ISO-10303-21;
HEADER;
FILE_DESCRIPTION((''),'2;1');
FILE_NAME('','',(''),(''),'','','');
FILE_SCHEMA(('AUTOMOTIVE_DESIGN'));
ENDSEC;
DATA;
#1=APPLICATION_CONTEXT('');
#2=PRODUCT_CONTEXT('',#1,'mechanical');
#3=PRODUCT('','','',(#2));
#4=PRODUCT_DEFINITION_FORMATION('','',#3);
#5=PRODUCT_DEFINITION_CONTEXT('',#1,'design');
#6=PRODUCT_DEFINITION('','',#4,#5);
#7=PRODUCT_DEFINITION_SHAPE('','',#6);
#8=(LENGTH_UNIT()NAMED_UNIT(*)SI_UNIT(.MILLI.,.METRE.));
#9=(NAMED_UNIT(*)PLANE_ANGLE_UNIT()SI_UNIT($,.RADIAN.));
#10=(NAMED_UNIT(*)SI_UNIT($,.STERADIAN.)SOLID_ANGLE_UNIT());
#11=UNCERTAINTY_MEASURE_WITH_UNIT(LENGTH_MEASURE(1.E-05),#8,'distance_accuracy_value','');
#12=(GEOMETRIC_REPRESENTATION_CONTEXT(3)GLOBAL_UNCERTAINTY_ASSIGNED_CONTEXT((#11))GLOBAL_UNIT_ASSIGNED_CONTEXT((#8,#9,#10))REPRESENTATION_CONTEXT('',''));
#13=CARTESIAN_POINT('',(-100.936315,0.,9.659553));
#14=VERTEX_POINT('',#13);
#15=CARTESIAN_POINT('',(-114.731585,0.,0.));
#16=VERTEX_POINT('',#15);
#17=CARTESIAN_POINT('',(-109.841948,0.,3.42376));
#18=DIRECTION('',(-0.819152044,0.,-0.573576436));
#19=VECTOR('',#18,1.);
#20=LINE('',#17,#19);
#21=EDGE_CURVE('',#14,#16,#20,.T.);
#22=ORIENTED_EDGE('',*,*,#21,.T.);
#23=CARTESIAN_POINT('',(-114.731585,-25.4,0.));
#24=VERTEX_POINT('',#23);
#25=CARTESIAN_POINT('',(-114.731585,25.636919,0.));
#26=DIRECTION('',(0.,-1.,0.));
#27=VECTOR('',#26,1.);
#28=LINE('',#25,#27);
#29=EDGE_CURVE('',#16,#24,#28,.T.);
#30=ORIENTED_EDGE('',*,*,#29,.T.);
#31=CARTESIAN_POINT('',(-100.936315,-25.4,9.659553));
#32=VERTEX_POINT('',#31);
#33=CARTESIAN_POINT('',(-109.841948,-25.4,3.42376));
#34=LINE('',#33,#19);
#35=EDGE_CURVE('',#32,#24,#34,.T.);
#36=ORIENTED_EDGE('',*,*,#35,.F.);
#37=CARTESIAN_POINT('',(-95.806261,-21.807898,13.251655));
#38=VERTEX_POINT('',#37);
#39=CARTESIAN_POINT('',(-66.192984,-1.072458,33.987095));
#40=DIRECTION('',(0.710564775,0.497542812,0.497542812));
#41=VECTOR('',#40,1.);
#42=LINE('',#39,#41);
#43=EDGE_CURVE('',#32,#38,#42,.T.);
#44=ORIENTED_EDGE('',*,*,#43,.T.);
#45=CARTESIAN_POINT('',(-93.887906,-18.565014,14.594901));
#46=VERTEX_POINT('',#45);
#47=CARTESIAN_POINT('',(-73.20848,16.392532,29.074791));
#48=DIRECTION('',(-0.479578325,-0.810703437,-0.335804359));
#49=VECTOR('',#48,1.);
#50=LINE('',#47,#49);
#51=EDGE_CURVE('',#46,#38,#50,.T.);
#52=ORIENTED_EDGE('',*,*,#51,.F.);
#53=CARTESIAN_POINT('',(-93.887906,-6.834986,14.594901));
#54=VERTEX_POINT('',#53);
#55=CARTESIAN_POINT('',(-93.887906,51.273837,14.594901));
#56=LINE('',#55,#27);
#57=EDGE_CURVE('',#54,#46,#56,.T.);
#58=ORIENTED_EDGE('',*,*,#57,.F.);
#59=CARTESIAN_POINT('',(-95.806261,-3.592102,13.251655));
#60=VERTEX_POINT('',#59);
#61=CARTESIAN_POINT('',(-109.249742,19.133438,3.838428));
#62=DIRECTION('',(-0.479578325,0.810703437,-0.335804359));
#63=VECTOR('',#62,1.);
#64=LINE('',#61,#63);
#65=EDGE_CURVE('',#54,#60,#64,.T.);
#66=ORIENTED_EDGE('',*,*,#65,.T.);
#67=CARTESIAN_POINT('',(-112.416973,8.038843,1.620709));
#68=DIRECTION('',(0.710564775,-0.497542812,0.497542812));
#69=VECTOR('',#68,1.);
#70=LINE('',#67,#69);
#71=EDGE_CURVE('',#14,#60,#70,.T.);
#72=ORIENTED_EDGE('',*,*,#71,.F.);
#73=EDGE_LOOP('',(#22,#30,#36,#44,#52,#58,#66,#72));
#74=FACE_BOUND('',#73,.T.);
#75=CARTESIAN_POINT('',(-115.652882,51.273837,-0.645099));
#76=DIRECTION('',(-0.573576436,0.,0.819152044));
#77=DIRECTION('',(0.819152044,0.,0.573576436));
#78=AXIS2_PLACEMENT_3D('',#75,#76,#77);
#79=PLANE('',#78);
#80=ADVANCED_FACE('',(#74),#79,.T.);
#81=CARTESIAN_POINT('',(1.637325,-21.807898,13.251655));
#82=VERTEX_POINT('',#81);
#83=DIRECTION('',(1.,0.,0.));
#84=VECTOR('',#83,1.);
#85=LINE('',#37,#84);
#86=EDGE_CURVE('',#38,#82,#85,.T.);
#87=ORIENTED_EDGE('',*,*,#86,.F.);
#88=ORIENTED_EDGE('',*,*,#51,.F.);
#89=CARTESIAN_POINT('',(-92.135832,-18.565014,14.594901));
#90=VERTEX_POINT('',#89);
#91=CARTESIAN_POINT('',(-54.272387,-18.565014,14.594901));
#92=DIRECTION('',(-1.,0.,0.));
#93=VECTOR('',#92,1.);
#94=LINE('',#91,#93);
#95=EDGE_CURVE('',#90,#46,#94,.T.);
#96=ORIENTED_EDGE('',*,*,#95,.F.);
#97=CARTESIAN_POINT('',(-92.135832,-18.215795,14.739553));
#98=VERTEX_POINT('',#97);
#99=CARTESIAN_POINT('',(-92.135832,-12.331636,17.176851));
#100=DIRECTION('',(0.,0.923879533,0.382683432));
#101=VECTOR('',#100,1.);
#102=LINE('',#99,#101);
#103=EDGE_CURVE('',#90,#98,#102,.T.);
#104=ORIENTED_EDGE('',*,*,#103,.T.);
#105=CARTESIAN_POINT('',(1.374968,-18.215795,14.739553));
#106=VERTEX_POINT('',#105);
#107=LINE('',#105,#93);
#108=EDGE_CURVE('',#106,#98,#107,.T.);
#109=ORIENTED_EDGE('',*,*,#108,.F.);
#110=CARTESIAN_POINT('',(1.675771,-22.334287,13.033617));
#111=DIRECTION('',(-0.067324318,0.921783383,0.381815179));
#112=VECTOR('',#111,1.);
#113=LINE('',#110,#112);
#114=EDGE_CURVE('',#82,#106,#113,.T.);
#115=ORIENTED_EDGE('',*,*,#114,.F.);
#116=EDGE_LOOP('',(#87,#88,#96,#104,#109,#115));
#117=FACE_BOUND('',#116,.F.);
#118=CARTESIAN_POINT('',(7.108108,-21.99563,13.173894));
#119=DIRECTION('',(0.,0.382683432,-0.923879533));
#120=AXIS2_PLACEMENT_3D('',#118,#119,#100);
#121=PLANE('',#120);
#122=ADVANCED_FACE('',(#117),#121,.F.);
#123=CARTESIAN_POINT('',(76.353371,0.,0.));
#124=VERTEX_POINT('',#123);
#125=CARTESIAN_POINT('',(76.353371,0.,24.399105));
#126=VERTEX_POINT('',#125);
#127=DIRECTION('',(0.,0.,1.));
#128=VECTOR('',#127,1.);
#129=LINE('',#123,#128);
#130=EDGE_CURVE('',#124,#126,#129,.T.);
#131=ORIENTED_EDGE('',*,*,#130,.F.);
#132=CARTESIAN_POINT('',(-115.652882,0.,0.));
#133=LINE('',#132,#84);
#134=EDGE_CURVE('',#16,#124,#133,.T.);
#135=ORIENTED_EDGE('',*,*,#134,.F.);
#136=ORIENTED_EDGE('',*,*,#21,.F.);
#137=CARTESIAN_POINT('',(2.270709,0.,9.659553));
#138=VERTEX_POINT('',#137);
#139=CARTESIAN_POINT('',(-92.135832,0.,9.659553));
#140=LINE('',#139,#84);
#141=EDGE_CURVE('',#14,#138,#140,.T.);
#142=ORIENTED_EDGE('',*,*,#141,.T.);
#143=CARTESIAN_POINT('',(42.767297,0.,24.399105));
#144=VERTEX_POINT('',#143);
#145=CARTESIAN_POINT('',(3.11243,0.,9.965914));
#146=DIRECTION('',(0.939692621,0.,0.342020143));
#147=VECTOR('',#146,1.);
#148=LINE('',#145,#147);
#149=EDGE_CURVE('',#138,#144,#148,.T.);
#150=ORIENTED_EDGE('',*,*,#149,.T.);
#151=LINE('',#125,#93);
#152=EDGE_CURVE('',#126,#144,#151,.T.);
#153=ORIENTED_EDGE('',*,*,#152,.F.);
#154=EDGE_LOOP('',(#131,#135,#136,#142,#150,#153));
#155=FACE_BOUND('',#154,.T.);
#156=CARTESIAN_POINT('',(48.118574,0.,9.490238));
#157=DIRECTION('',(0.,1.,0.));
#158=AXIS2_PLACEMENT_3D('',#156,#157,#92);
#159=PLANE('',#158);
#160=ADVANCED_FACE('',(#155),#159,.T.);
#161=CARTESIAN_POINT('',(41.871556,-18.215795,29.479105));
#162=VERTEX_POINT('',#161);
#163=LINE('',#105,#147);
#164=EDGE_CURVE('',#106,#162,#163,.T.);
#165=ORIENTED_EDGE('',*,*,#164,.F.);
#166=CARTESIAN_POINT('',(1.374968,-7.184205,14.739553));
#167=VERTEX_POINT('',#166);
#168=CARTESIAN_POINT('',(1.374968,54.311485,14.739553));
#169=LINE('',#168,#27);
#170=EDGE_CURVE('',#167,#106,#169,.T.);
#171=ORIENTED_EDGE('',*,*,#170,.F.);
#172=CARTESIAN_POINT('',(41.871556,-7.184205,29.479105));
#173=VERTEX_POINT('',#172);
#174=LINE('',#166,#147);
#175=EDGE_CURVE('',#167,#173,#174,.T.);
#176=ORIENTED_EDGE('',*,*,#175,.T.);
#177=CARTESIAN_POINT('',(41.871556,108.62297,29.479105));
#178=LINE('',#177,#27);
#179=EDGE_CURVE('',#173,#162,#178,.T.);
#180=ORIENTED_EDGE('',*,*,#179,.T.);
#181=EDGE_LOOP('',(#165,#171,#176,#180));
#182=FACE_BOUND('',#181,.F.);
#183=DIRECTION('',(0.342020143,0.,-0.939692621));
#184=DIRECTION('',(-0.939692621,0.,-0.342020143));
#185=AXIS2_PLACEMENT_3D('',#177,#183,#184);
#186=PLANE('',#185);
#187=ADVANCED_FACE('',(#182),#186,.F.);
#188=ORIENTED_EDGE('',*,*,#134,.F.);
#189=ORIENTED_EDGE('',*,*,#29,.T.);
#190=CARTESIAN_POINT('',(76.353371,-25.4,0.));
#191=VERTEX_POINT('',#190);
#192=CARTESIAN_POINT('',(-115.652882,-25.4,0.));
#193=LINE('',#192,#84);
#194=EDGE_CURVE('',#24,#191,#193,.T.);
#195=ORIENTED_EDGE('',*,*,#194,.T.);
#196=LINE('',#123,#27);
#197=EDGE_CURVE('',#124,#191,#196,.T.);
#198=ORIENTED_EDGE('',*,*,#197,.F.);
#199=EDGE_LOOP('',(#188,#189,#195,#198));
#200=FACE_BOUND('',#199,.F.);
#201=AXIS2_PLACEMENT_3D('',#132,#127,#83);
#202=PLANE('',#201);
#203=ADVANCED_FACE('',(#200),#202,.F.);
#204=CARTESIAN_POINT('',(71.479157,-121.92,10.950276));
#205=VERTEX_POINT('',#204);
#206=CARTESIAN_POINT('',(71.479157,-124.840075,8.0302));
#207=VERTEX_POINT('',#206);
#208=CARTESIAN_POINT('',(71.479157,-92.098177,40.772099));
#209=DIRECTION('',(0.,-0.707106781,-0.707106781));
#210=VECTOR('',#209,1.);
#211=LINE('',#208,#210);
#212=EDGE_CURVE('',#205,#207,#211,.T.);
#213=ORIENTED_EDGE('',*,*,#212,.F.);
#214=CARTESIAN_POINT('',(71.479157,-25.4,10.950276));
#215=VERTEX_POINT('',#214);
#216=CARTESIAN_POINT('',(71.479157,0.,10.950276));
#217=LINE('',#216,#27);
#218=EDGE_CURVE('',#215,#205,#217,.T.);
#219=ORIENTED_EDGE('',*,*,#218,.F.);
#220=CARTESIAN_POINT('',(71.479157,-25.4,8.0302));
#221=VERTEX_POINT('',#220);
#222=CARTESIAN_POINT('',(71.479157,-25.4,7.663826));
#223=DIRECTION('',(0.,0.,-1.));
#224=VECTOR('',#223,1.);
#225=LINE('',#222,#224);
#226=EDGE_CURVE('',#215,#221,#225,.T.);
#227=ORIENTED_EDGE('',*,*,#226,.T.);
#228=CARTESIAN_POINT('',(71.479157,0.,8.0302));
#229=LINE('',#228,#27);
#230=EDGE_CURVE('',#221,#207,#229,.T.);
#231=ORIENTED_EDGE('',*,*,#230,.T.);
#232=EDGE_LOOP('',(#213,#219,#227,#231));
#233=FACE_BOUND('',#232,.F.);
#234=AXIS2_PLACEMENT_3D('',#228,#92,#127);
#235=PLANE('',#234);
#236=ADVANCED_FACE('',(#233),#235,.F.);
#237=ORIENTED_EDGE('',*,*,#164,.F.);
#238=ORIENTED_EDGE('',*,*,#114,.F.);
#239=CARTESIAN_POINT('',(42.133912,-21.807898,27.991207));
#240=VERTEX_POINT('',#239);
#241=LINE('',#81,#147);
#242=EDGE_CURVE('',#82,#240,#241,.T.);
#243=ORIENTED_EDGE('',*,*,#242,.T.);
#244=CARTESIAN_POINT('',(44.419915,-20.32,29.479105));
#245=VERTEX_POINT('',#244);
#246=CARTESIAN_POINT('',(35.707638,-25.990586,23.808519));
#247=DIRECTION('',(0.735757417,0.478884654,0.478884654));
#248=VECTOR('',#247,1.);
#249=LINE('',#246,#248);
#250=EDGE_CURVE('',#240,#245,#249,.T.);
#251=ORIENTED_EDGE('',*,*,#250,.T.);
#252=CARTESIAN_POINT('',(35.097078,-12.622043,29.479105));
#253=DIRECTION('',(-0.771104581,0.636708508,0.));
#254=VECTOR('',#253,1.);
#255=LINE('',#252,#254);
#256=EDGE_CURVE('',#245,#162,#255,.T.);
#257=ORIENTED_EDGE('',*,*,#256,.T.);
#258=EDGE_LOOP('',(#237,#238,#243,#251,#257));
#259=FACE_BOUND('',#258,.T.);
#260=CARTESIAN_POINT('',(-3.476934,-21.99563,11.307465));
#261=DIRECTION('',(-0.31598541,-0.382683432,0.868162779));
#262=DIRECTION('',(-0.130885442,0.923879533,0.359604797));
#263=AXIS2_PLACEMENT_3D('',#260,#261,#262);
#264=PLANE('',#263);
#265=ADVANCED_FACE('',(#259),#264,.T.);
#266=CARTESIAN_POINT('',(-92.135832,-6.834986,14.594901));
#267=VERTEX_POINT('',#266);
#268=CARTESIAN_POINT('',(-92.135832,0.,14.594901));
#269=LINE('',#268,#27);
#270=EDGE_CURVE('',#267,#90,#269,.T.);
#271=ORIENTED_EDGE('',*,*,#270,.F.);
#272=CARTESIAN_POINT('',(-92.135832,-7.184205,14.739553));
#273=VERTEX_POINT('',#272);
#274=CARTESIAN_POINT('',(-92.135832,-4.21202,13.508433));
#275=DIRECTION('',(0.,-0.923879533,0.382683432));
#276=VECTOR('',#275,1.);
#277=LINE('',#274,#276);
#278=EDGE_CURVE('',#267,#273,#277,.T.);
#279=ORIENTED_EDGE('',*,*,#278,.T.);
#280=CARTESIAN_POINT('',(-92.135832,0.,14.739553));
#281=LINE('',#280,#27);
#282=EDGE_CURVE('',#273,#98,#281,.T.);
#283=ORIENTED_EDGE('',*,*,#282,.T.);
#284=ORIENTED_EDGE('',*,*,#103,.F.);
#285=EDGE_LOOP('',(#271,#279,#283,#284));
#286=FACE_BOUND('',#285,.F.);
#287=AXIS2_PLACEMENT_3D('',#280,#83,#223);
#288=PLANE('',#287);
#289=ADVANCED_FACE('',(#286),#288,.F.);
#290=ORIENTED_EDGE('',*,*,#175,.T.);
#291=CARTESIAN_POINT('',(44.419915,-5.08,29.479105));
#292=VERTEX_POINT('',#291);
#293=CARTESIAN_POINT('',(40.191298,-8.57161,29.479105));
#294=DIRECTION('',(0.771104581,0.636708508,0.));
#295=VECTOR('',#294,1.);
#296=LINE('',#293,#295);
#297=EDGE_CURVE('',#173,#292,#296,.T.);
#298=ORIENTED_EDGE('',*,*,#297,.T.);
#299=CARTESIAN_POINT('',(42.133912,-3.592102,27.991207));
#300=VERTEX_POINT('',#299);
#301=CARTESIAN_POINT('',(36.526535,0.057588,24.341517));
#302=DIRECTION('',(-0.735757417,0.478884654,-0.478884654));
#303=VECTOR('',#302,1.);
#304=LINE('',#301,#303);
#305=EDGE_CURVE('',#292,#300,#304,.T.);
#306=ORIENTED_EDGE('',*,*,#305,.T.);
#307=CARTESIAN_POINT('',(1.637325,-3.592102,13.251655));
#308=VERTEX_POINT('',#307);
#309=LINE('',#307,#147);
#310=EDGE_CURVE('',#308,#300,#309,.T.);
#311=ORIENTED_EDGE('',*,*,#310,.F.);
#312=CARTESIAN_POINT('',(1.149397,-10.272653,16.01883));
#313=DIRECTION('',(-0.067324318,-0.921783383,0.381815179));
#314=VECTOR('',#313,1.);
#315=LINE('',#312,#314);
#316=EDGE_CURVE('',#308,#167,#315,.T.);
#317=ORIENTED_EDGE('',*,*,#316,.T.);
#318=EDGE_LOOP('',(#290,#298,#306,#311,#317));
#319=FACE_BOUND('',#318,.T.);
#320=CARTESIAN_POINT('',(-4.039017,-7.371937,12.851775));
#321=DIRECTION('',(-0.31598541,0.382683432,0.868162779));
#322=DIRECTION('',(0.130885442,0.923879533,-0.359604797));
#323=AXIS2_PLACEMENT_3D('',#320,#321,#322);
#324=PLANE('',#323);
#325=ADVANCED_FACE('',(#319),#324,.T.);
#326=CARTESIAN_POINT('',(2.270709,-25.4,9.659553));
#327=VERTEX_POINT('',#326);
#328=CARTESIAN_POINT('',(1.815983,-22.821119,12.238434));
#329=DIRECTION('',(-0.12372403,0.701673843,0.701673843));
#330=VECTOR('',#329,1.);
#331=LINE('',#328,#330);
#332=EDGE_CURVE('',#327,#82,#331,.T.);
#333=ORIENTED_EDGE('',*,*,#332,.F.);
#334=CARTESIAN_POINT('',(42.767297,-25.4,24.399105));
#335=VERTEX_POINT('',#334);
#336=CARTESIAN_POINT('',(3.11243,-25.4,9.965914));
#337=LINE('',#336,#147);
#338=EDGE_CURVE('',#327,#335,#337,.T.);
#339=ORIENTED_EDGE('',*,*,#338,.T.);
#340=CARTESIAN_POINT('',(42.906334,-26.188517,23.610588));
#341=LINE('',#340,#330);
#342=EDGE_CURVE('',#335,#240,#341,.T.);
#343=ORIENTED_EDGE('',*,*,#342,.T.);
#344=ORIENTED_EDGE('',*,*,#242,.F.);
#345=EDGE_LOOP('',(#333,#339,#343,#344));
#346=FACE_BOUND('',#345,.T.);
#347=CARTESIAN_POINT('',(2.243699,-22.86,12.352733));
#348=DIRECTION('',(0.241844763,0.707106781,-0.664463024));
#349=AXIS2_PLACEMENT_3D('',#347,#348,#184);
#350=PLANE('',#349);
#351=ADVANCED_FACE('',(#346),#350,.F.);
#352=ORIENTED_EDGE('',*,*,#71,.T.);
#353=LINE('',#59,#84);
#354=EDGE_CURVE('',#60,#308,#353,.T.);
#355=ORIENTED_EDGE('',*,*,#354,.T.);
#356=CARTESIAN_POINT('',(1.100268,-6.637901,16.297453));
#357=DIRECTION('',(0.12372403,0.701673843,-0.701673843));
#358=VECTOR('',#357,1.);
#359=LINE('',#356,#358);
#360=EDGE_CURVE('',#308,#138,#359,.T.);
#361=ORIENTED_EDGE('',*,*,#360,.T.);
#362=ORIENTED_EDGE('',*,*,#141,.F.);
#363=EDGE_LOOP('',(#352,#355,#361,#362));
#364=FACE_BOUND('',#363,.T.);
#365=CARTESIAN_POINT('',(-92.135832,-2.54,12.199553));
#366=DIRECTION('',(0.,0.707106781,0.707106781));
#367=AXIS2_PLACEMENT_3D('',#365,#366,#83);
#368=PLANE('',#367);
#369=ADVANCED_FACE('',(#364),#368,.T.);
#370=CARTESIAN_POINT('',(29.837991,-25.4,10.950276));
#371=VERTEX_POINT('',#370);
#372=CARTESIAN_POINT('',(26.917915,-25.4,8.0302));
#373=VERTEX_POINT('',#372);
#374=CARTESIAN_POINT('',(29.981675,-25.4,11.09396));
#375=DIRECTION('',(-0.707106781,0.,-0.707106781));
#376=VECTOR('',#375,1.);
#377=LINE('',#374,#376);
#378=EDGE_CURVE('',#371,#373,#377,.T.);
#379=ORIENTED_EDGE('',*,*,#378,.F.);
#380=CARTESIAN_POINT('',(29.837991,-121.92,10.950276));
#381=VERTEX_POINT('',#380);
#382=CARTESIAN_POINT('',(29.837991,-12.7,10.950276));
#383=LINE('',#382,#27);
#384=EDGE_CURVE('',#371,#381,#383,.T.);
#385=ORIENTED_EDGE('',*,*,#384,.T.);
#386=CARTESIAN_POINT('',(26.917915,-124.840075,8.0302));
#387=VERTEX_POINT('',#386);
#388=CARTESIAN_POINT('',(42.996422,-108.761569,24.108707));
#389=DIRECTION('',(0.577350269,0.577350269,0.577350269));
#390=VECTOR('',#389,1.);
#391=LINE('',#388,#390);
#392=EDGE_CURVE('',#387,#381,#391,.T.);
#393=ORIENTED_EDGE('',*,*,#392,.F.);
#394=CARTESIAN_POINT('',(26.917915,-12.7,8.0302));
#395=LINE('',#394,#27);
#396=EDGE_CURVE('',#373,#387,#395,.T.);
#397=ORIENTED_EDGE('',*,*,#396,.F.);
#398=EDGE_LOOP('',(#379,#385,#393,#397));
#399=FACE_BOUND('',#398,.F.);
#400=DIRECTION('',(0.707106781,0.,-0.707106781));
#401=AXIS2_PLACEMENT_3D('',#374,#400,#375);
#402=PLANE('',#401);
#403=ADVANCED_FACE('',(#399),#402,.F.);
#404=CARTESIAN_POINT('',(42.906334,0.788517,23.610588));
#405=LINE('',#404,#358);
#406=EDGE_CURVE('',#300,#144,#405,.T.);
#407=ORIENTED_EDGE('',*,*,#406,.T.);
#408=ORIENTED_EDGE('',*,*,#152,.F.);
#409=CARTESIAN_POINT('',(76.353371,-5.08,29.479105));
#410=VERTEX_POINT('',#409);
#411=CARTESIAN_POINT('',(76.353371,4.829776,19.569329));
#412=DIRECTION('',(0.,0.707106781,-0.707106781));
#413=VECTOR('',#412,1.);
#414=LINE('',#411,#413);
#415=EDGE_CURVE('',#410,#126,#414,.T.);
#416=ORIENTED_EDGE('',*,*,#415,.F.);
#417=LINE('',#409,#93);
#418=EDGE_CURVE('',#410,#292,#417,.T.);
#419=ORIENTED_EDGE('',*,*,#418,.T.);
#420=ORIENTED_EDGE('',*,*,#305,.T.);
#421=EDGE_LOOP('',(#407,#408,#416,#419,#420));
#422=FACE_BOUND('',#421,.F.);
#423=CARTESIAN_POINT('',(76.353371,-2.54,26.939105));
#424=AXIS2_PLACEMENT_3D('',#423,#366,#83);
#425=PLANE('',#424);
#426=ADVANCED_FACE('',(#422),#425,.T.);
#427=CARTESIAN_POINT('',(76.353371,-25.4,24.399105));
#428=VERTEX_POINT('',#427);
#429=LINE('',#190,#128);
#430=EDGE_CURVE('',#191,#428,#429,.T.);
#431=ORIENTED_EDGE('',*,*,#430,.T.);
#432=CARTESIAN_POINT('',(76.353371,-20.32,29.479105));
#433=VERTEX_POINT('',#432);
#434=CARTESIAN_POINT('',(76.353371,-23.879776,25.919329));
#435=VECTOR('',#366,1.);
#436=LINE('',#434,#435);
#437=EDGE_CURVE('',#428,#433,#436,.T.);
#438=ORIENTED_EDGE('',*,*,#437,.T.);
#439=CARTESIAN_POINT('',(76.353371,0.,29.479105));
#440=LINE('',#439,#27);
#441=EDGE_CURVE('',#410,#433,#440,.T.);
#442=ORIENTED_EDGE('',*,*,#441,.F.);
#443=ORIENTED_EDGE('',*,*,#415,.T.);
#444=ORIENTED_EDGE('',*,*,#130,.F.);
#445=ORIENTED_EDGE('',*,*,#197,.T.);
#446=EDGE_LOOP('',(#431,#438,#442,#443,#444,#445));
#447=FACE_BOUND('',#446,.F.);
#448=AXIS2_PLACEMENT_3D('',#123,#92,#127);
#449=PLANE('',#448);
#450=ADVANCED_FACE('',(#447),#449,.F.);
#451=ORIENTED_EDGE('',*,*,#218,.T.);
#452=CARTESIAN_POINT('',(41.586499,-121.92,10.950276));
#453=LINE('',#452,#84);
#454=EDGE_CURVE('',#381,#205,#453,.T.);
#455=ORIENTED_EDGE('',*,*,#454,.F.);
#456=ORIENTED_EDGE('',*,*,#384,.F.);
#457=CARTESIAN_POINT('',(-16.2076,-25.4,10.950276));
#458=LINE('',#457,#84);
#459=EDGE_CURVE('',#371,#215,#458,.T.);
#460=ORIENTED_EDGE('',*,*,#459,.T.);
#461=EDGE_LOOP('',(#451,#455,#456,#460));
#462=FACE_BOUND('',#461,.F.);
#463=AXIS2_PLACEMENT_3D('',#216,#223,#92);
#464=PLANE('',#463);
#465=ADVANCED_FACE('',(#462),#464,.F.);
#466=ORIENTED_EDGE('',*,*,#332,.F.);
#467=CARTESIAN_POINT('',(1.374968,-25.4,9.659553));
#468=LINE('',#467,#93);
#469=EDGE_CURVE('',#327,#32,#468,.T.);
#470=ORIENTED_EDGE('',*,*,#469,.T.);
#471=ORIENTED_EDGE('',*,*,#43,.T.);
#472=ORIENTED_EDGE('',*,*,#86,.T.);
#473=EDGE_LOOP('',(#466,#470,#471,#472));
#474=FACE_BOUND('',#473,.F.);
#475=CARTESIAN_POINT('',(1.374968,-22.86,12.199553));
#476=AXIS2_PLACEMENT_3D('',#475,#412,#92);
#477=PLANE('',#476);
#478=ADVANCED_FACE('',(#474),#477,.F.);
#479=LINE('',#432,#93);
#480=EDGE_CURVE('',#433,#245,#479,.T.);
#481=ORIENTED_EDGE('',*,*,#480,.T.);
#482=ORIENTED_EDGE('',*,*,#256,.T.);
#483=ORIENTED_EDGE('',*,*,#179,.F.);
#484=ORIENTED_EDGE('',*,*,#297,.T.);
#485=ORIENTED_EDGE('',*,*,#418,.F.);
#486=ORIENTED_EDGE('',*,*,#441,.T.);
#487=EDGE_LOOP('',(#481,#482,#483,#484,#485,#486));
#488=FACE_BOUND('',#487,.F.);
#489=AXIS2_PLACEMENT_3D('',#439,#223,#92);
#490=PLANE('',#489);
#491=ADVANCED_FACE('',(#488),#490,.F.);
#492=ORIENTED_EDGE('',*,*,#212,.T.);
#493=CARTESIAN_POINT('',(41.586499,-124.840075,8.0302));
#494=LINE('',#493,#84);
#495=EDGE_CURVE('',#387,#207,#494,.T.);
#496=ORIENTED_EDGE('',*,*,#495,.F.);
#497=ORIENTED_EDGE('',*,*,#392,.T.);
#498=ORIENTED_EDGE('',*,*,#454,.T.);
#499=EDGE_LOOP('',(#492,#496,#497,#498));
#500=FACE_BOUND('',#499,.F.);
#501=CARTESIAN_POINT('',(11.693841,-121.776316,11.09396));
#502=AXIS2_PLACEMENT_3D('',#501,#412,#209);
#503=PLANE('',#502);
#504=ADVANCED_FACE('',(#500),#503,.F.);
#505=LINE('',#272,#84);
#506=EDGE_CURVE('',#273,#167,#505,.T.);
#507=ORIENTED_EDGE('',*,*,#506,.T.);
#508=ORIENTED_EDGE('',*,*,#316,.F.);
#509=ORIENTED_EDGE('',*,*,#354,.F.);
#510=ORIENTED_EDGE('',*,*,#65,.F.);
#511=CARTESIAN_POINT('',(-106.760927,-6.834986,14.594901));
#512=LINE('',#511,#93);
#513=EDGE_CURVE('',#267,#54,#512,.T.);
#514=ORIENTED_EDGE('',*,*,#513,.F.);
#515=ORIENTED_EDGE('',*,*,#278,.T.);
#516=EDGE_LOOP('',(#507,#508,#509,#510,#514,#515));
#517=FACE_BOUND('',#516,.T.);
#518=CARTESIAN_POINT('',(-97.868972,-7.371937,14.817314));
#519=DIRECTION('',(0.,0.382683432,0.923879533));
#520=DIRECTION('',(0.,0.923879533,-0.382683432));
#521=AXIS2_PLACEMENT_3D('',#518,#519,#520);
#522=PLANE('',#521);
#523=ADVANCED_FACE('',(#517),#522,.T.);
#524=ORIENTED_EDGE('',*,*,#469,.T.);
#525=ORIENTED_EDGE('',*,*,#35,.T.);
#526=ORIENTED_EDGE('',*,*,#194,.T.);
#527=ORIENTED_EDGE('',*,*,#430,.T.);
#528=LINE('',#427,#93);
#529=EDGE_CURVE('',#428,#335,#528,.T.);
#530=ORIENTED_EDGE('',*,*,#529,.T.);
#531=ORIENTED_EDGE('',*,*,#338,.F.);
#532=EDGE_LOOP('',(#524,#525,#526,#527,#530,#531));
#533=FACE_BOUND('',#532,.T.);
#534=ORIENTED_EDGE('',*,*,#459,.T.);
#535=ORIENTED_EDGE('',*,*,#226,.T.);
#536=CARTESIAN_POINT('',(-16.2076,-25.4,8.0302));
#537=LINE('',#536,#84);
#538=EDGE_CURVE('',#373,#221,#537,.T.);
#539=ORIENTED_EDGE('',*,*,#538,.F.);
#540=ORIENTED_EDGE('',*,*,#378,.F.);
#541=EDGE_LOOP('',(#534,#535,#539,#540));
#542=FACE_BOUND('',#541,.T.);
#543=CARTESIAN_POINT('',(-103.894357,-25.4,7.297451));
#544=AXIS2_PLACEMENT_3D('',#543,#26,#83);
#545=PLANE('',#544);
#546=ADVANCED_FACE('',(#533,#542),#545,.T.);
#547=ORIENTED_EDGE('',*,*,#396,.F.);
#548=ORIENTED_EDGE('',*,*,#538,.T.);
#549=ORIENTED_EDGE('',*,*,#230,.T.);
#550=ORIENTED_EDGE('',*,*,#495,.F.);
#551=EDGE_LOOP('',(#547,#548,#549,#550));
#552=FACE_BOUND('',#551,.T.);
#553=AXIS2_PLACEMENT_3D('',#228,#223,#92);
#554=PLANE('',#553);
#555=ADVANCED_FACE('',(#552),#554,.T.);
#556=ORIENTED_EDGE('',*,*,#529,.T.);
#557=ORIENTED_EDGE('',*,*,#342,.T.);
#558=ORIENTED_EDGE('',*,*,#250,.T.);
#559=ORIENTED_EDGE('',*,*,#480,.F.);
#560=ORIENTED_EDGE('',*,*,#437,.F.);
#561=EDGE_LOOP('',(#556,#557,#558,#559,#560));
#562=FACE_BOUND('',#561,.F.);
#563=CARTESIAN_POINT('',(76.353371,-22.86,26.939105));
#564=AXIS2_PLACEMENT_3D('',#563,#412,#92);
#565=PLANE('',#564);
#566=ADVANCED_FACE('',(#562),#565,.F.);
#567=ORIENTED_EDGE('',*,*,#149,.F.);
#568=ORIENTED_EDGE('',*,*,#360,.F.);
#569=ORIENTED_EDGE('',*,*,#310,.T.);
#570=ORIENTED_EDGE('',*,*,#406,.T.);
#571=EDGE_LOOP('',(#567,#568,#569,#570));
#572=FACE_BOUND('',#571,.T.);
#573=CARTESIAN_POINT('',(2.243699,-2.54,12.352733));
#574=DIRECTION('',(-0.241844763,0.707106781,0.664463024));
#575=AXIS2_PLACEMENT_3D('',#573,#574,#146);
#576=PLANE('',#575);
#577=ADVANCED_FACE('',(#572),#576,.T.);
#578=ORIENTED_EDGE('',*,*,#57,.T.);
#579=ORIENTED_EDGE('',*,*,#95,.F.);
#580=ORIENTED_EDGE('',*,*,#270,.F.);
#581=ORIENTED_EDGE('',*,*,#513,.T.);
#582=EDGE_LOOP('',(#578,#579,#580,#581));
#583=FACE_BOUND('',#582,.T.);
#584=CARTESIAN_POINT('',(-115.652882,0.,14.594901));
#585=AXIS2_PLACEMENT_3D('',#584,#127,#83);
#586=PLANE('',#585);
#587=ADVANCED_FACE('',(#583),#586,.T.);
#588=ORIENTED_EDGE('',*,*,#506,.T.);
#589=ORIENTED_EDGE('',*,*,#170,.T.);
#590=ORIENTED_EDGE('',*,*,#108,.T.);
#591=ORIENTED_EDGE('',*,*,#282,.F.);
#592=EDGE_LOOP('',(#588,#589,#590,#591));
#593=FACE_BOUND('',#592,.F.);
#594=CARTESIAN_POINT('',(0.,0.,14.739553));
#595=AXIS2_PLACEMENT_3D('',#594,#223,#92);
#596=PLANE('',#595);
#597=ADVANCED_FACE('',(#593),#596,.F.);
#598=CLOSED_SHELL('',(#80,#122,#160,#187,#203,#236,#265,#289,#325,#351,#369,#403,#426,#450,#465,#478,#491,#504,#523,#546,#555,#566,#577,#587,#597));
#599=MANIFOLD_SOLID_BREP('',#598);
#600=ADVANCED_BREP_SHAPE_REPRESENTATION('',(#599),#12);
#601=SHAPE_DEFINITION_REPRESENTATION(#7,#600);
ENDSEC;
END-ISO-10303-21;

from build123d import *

# Parameters (mm, degrees)
F0_W         = 23.517049849
F0_H         = 14.5949013531
F1_DEPTH     = 25.4
F2_T4_DEPTH  = 242.6459393762
F3_SIZE      = 5.08
F4_T1_DEPTH  = 127.9476749925
F5_W         = 46.7211659998
F5_H         = 2.9200753197
F6_DEPTH     = 127
F7_T1_DEPTH  = 114.6641495789
F7_T3_DEPTH  = 72.8494651575
F7_T8_DEPTH  = 58.5750464118
F7_T14_DEPTH = 58.5750464118
F7_T20_DEPTH = 58.5750464118
F7_T26_DEPTH = 104.9770798243
F7_T32_DEPTH = 104.9770798243
F7_T38_DEPTH = 104.9770798243
F7_T44_DEPTH = 104.9770798243
F7_T50_DEPTH = 104.9770798243
F7_T56_DEPTH = 104.9770798243
F7_T62_DEPTH = 58.5750464118
F7_T68_DEPTH = 58.5750464118
F7_T74_DEPTH = 58.5750464118
F7_T81_DEPTH = 104.9770798243
F7_T86_DEPTH = 58.5750464118
F7_T94_DEPTH = 104.9770798243
F7_T99_DEPTH = 58.5750464118


# Not quite as in the source:
# - a fillet or chamfer that OpenCascade refuses, or shapes differently, is made with other operations: its cross-section is extruded or revolved along the edge and cut away or added


with BuildPart() as f1:
    # F0 (on Front) → F1 (new body)
    with BuildSketch(Plane.XZ):
        with Locations((-103.8943566382, 7.2974506766)):
            Rectangle(F0_W, F0_H)
        Polygon((-92.1358317137, 0), (0, 0), (0, 14.7395525128), (-92.1358317137, 14.7395525128), (-92.1358317137, 14.5949013531), align=None)
        Polygon((0, 0), (76.3533711433, 0), (76.3533711433, 29.4791050255), (0, 29.4791050255), (0, 14.7395525128), align=None)
    extrude(amount=F1_DEPTH)

    # F2: chamfer of 15.24 x 41.8715558725 on 1 edges, made by hand


with BuildPart() as f2_tool2:
    # F2_s3 → F2_t4 (new body)
    with BuildSketch(Plane.XZ.offset(-108.6229696881)):
        Polygon((41.8715558725, 29.4791050255), (0, 14.2391050255), (0, 29.4791050255), align=None)
    extrude(amount=F2_T4_DEPTH)

    split(bisect_by=Plane.XY.offset(14.7395525128), keep=Keep.TOP)


with BuildPart() as f1_1:
    add(f1.part)

    # F2_t1: cut F2_tool2
    add(f2_tool2.part, mode=Mode.SUBTRACT)

    # F3
    f3_edges = [f1_1.edges().sort_by_distance(p)[0] for p in [
        (-45.380432, -25.4, 14.739553),
        (-45.380432, 0, 14.739553),
        (59.112464, -25.4, 29.479105),
        (21.623262, -25.4, 22.109329),
        (21.623262, 0, 22.109329),
        (59.112464, 0, 29.479105),
    ]]
    chamfer(f3_edges, length=F3_SIZE)

    # F4: chamfer of 15.24 x 21.7649756227 on 1 edges, made by hand

    # F4_s2 → F4_t1 (cut)
    with BuildSketch(Plane.XZ.offset(-51.2738374963)):
        Polygon((-115.6528815627, -0.6450986469), (-93.88790594, 14.5949013531), (-115.6528815627, 14.5949013531), align=None)
    extrude(amount=F4_T1_DEPTH, mode=Mode.SUBTRACT)

    # F5 (on face) → F6 (join)
    with BuildSketch(Plane(origin=(0, 0, 0), x_dir=(-1, 0, 0), z_dir=(0, 1, 0))):
        with Locations((-48.1185736135, 9.490238037)):
            Rectangle(F5_W, F5_H)
    extrude(amount=-F6_DEPTH)

    # F7: chamfer of 5.08 on 6 edges, made by hand

    # F7_s2 → F7_t1 (cut)
    with BuildSketch(Plane.XZ.offset(25.4)):
        with BuildLine():
            Line((29.9816747115, 11.0939597948), (24.6143065156, 5.7265915989))
            Line((24.6143065156, 5.7265915989), (24.5127065156, 5.7265915989))
            ThreePointArc((24.5127065156, 5.7265915989), (24.6563906136, 8.3384336478), (24.6563906136, 10.9502756968))
            Line((24.6563906136, 10.9502756968), (24.7579906136, 11.0518756968))
            ThreePointArc((24.7579906136, 11.0518756968), (27.3698326625, 11.0518756968), (29.9816747115, 11.1955597948))
            Line((29.9816747115, 11.1955597948), (29.9816747115, 11.0939597948))
        make_face()
    extrude(amount=F7_T1_DEPTH, mode=Mode.SUBTRACT)

    # F7_s4 → F7_t3 (cut)
    with BuildSketch(Plane.YZ.offset(11.6938410347)):
        with BuildLine():
            Line((-121.7763159021, 11.0939597948), (-127.1436840979, 5.7265915989))
            Line((-127.1436840979, 5.7265915989), (-127.2452840979, 5.7265915989))
            ThreePointArc((-127.2452840979, 5.7265915989), (-127.1016, 8.3384336478), (-127.1016, 10.9502756968))
            Line((-127.1016, 10.9502756968), (-127, 11.0518756968))
            ThreePointArc((-127, 11.0518756968), (-124.388157951, 11.0518756968), (-121.7763159021, 11.1955597948))
            Line((-121.7763159021, 11.1955597948), (-121.7763159021, 11.0939597948))
        make_face()
    extrude(amount=F7_T3_DEPTH, mode=Mode.SUBTRACT)


with BuildPart() as f7_tool6:
    # F7_s7 → F7_t8 (new body)
    with BuildSketch(Plane(origin=(0.563938989, 0, 0.2052570059), x_dir=(0, 1, 0), z_dir=(0.9396926208, 0, 0.3420201433))):
        with BuildLine():
            Line((-7.3719372179, 13.4581431925), (-3.4043701274, 11.814723094))
            Line((-3.4043701274, 11.814723094), (-3.3325280785, 11.886565143))
            ThreePointArc((-3.3325280785, 11.886565143), (-4.1978357766, 12.6419017936), (-5.008157951, 13.452223968))
            Line((-5.008157951, 13.452223968), (-5.08, 13.4819819191))
            ThreePointArc((-5.08, 13.4819819191), (-6.2259686089, 13.4819819191), (-7.3719372179, 13.5597431925))
            Line((-7.3719372179, 13.5597431925), (-7.3719372179, 13.4581431925))
        make_face()
    extrude(amount=F7_T8_DEPTH)

    split(bisect_by=Plane.XY.offset(14.7395525128), keep=Keep.BOTTOM)

    split(bisect_by=Plane(origin=(0, 4.8297762564, 4.8297762564), x_dir=(1, 0, 0), z_dir=(0, 0.7071067812, 0.7071067812)), keep=Keep.TOP)


with BuildPart() as f1_2:
    add(f1_1.part)

    # F7_t5: cut F7_tool6
    add(f7_tool6.part, mode=Mode.SUBTRACT)


with BuildPart() as f7_tool12:
    # F7_s13 → F7_t14 (new body)
    with BuildSketch(Plane(origin=(0.563938989, 0, 0.2052570059), x_dir=(0, 1, 0), z_dir=(0.9396926208, 0, 0.3420201433))):
        with BuildLine():
            Line((-7.3719372179, 13.4581431925), (-3.4043701274, 11.814723094))
            Line((-3.4043701274, 11.814723094), (-3.3325280785, 11.886565143))
            ThreePointArc((-3.3325280785, 11.886565143), (-4.1978357766, 12.6419017936), (-5.008157951, 13.452223968))
            Line((-5.008157951, 13.452223968), (-5.08, 13.4819819191))
            ThreePointArc((-5.08, 13.4819819191), (-6.2259686089, 13.4819819191), (-7.3719372179, 13.5597431925))
            Line((-7.3719372179, 13.5597431925), (-7.3719372179, 13.4581431925))
        make_face()
    extrude(amount=F7_T14_DEPTH)

    split(bisect_by=Plane.XY.offset(14.7395525128), keep=Keep.TOP)

    split(bisect_by=Plane(origin=(0, 4.8297762564, 4.8297762564), x_dir=(1, 0, 0), z_dir=(0, -0.7071067812, -0.7071067812)), keep=Keep.TOP)


with BuildPart() as f1_3:
    add(f1_2.part)

    # F7_t11: cut F7_tool12
    add(f7_tool12.part, mode=Mode.SUBTRACT)


with BuildPart() as f7_tool18:
    # F7_s19 → F7_t20 (new body)
    with BuildSketch(Plane(origin=(0.563938989, 0, 0.2052570059), x_dir=(0, 1, 0), z_dir=(0.9396926208, 0, 0.3420201433))):
        with BuildLine():
            Line((-7.3719372179, 13.4581431925), (-3.4043701274, 11.814723094))
            Line((-3.4043701274, 11.814723094), (-3.3325280785, 11.886565143))
            ThreePointArc((-3.3325280785, 11.886565143), (-4.1978357766, 12.6419017936), (-5.008157951, 13.452223968))
            Line((-5.008157951, 13.452223968), (-5.08, 13.4819819191))
            ThreePointArc((-5.08, 13.4819819191), (-6.2259686089, 13.4819819191), (-7.3719372179, 13.5597431925))
            Line((-7.3719372179, 13.5597431925), (-7.3719372179, 13.4581431925))
        make_face()
    extrude(amount=F7_T20_DEPTH)

    split(bisect_by=Plane.XY.offset(14.7395525128), keep=Keep.TOP)

    split(bisect_by=Plane(origin=(0, 4.8297762564, 4.8297762564), x_dir=(1, 0, 0), z_dir=(0, 0.7071067812, 0.7071067812)), keep=Keep.TOP)


with BuildPart() as f1_4:
    add(f1_3.part)

    # F7_t17: cut F7_tool18
    add(f7_tool18.part, mode=Mode.SUBTRACT)


with BuildPart() as f7_tool24:
    # F7_s25 → F7_t26 (new body)
    with BuildSketch(Plane.YZ.offset(-97.8689716836)):
        with BuildLine():
            Line((-7.3719372179, 14.8173137862), (-3.4043701274, 13.1738936877))
            Line((-3.4043701274, 13.1738936877), (-3.3325280785, 13.2457357367))
            ThreePointArc((-3.3325280785, 13.2457357367), (-4.1978357766, 14.0010723873), (-5.008157951, 14.8113945617))
            Line((-5.008157951, 14.8113945617), (-5.08, 14.8411525128))
            ThreePointArc((-5.08, 14.8411525128), (-6.2259686089, 14.8411525128), (-7.3719372179, 14.9189137862))
            Line((-7.3719372179, 14.9189137862), (-7.3719372179, 14.8173137862))
        make_face()
    extrude(amount=F7_T26_DEPTH)

    split(bisect_by=Plane(origin=(-4.5763601417, 0, 12.5734461526), x_dir=(0, 1, 0), z_dir=(-0.3420201433, 0, 0.9396926208)), keep=Keep.TOP)

    split(bisect_by=Plane(origin=(-1.4194489068, 4.1501909595, 3.8999038195), x_dir=(-0.9461886483, -0.3236155771, 0), z_dir=(-0.2418447626, 0.7071067812, 0.6644630244)), keep=Keep.TOP)


with BuildPart() as f1_5:
    add(f1_4.part)

    # F7_t23: cut F7_tool24
    add(f7_tool24.part, mode=Mode.SUBTRACT)


with BuildPart() as f7_tool30:
    # F7_s31 → F7_t32 (new body)
    with BuildSketch(Plane.YZ.offset(-97.8689716836)):
        with BuildLine():
            Line((-7.3719372179, 14.8173137862), (-3.4043701274, 13.1738936877))
            Line((-3.4043701274, 13.1738936877), (-3.3325280785, 13.2457357367))
            ThreePointArc((-3.3325280785, 13.2457357367), (-4.1978357766, 14.0010723873), (-5.008157951, 14.8113945617))
            Line((-5.008157951, 14.8113945617), (-5.08, 14.8411525128))
            ThreePointArc((-5.08, 14.8411525128), (-6.2259686089, 14.8411525128), (-7.3719372179, 14.9189137862))
            Line((-7.3719372179, 14.9189137862), (-7.3719372179, 14.8173137862))
        make_face()
    extrude(amount=F7_T32_DEPTH)

    split(bisect_by=Plane(origin=(-4.5763601417, 0, 12.5734461526), x_dir=(0, 1, 0), z_dir=(0.3420201433, 0, -0.9396926208)), keep=Keep.TOP)

    split(bisect_by=Plane(origin=(-1.4194489068, 4.1501909595, 3.8999038195), x_dir=(-0.9461886483, -0.3236155771, 0), z_dir=(-0.2418447626, 0.7071067812, 0.6644630244)), keep=Keep.TOP)


with BuildPart() as f1_6:
    add(f1_5.part)

    # F7_t29: cut F7_tool30
    add(f7_tool30.part, mode=Mode.SUBTRACT)


with BuildPart() as f7_tool36:
    # F7_s37 → F7_t38 (new body)
    with BuildSketch(Plane.YZ.offset(-97.8689716836)):
        with BuildLine():
            Line((-7.3719372179, 14.8173137862), (-3.4043701274, 13.1738936877))
            Line((-3.4043701274, 13.1738936877), (-3.3325280785, 13.2457357367))
            ThreePointArc((-3.3325280785, 13.2457357367), (-4.1978357766, 14.0010723873), (-5.008157951, 14.8113945617))
            Line((-5.008157951, 14.8113945617), (-5.08, 14.8411525128))
            ThreePointArc((-5.08, 14.8411525128), (-6.2259686089, 14.8411525128), (-7.3719372179, 14.9189137862))
            Line((-7.3719372179, 14.9189137862), (-7.3719372179, 14.8173137862))
        make_face()
    extrude(amount=F7_T38_DEPTH)

    split(bisect_by=Plane(origin=(-4.5763601417, 0, 12.5734461526), x_dir=(0, 1, 0), z_dir=(-0.3420201433, 0, 0.9396926208)), keep=Keep.TOP)

    split(bisect_by=Plane(origin=(-1.4194489068, 4.1501909595, 3.8999038195), x_dir=(0.9461886483, 0.3236155771, 0), z_dir=(0.2418447626, -0.7071067812, -0.6644630244)), keep=Keep.TOP)


with BuildPart() as f1_7:
    add(f1_6.part)

    # F7_t35: cut F7_tool36
    add(f7_tool36.part, mode=Mode.SUBTRACT)


with BuildPart() as f7_tool42:
    # F7_s43 → F7_t44 (new body)
    with BuildSketch(Plane.YZ.offset(7.1081081408)):
        with BuildLine():
            Line((-21.9956298726, 13.1738936877), (-18.0280627821, 14.8173137862))
            Line((-18.0280627821, 14.8173137862), (-18.0280627821, 14.9189137862))
            ThreePointArc((-18.0280627821, 14.9189137862), (-19.1740313911, 14.8411525128), (-20.32, 14.8411525128))
            Line((-20.32, 14.8411525128), (-20.391842049, 14.8113945617))
            ThreePointArc((-20.391842049, 14.8113945617), (-21.2021642234, 14.0010723873), (-22.0674719215, 13.2457357367))
            Line((-22.0674719215, 13.2457357367), (-21.9956298726, 13.1738936877))
        make_face()
    extrude(amount=-F7_T44_DEPTH)

    split(bisect_by=Plane(origin=(-5.763104727, -16.8501909595, 15.8340001035), x_dir=(-0.9461886483, 0.3236155771, 0), z_dir=(0.2418447626, 0.7071067812, -0.6644630244)), keep=Keep.TOP)

    split(bisect_by=Plane(origin=(-4.5763601417, 0, 12.5734461526), x_dir=(0, 1, 0), z_dir=(-0.3420201433, 0, 0.9396926208)), keep=Keep.TOP)


with BuildPart() as f1_8:
    add(f1_7.part)

    # F7_t41: cut F7_tool42
    add(f7_tool42.part, mode=Mode.SUBTRACT)


with BuildPart() as f7_tool48:
    # F7_s49 → F7_t50 (new body)
    with BuildSketch(Plane.YZ.offset(7.1081081408)):
        with BuildLine():
            Line((-21.9956298726, 13.1738936877), (-18.0280627821, 14.8173137862))
            Line((-18.0280627821, 14.8173137862), (-18.0280627821, 14.9189137862))
            ThreePointArc((-18.0280627821, 14.9189137862), (-19.1740313911, 14.8411525128), (-20.32, 14.8411525128))
            Line((-20.32, 14.8411525128), (-20.391842049, 14.8113945617))
            ThreePointArc((-20.391842049, 14.8113945617), (-21.2021642234, 14.0010723873), (-22.0674719215, 13.2457357367))
            Line((-22.0674719215, 13.2457357367), (-21.9956298726, 13.1738936877))
        make_face()
    extrude(amount=-F7_T50_DEPTH)

    split(bisect_by=Plane(origin=(-5.763104727, -16.8501909595, 15.8340001035), x_dir=(0.9461886483, -0.3236155771, 0), z_dir=(-0.2418447626, -0.7071067812, 0.6644630244)), keep=Keep.TOP)

    split(bisect_by=Plane(origin=(-4.5763601417, 0, 12.5734461526), x_dir=(0, 1, 0), z_dir=(0.3420201433, 0, -0.9396926208)), keep=Keep.TOP)


with BuildPart() as f1_9:
    add(f1_8.part)

    # F7_t47: cut F7_tool48
    add(f7_tool48.part, mode=Mode.SUBTRACT)


with BuildPart() as f7_tool54:
    # F7_s55 → F7_t56 (new body)
    with BuildSketch(Plane.YZ.offset(7.1081081408)):
        with BuildLine():
            Line((-21.9956298726, 13.1738936877), (-18.0280627821, 14.8173137862))
            Line((-18.0280627821, 14.8173137862), (-18.0280627821, 14.9189137862))
            ThreePointArc((-18.0280627821, 14.9189137862), (-19.1740313911, 14.8411525128), (-20.32, 14.8411525128))
            Line((-20.32, 14.8411525128), (-20.391842049, 14.8113945617))
            ThreePointArc((-20.391842049, 14.8113945617), (-21.2021642234, 14.0010723873), (-22.0674719215, 13.2457357367))
            Line((-22.0674719215, 13.2457357367), (-21.9956298726, 13.1738936877))
        make_face()
    extrude(amount=-F7_T56_DEPTH)

    split(bisect_by=Plane(origin=(-5.763104727, -16.8501909595, 15.8340001035), x_dir=(0.9461886483, -0.3236155771, 0), z_dir=(-0.2418447626, -0.7071067812, 0.6644630244)), keep=Keep.TOP)

    split(bisect_by=Plane(origin=(-4.5763601417, 0, 12.5734461526), x_dir=(0, 1, 0), z_dir=(-0.3420201433, 0, 0.9396926208)), keep=Keep.TOP)


with BuildPart() as f1_10:
    add(f1_9.part)

    # F7_t53: cut F7_tool54
    add(f7_tool54.part, mode=Mode.SUBTRACT)


with BuildPart() as f7_tool60:
    # F7_s61 → F7_t62 (new body)
    with BuildSketch(Plane(origin=(0.563938989, 0, 0.2052570059), x_dir=(0, 1, 0), z_dir=(0.9396926208, 0, 0.3420201433))):
        with BuildLine():
            Line((-21.9956298726, 11.814723094), (-18.0280627821, 13.4581431925))
            Line((-18.0280627821, 13.4581431925), (-18.0280627821, 13.5597431925))
            ThreePointArc((-18.0280627821, 13.5597431925), (-19.1740313911, 13.4819819191), (-20.32, 13.4819819191))
            Line((-20.32, 13.4819819191), (-20.391842049, 13.452223968))
            ThreePointArc((-20.391842049, 13.452223968), (-21.2021642234, 12.6419017936), (-22.0674719215, 11.886565143))
            Line((-22.0674719215, 11.886565143), (-21.9956298726, 11.814723094))
        make_face()
    extrude(amount=F7_T62_DEPTH)

    split(bisect_by=Plane(origin=(0, -17.5297762564, 17.5297762564), x_dir=(1, 0, 0), z_dir=(0, 0.7071067812, -0.7071067812)), keep=Keep.TOP)

    split(bisect_by=Plane.XY.offset(14.7395525128), keep=Keep.TOP)


with BuildPart() as f1_11:
    add(f1_10.part)

    # F7_t59: cut F7_tool60
    add(f7_tool60.part, mode=Mode.SUBTRACT)


with BuildPart() as f7_tool66:
    # F7_s67 → F7_t68 (new body)
    with BuildSketch(Plane(origin=(0.563938989, 0, 0.2052570059), x_dir=(0, 1, 0), z_dir=(0.9396926208, 0, 0.3420201433))):
        with BuildLine():
            Line((-21.9956298726, 11.814723094), (-18.0280627821, 13.4581431925))
            Line((-18.0280627821, 13.4581431925), (-18.0280627821, 13.5597431925))
            ThreePointArc((-18.0280627821, 13.5597431925), (-19.1740313911, 13.4819819191), (-20.32, 13.4819819191))
            Line((-20.32, 13.4819819191), (-20.391842049, 13.452223968))
            ThreePointArc((-20.391842049, 13.452223968), (-21.2021642234, 12.6419017936), (-22.0674719215, 11.886565143))
            Line((-22.0674719215, 11.886565143), (-21.9956298726, 11.814723094))
        make_face()
    extrude(amount=F7_T68_DEPTH)

    split(bisect_by=Plane(origin=(0, -17.5297762564, 17.5297762564), x_dir=(1, 0, 0), z_dir=(0, -0.7071067812, 0.7071067812)), keep=Keep.TOP)

    split(bisect_by=Plane.XY.offset(14.7395525128), keep=Keep.BOTTOM)


with BuildPart() as f1_12:
    add(f1_11.part)

    # F7_t65: cut F7_tool66
    add(f7_tool66.part, mode=Mode.SUBTRACT)


with BuildPart() as f7_tool72:
    # F7_s73 → F7_t74 (new body)
    with BuildSketch(Plane(origin=(0.563938989, 0, 0.2052570059), x_dir=(0, 1, 0), z_dir=(0.9396926208, 0, 0.3420201433))):
        with BuildLine():
            Line((-21.9956298726, 11.814723094), (-18.0280627821, 13.4581431925))
            Line((-18.0280627821, 13.4581431925), (-18.0280627821, 13.5597431925))
            ThreePointArc((-18.0280627821, 13.5597431925), (-19.1740313911, 13.4819819191), (-20.32, 13.4819819191))
            Line((-20.32, 13.4819819191), (-20.391842049, 13.452223968))
            ThreePointArc((-20.391842049, 13.452223968), (-21.2021642234, 12.6419017936), (-22.0674719215, 11.886565143))
            Line((-22.0674719215, 11.886565143), (-21.9956298726, 11.814723094))
        make_face()
    extrude(amount=F7_T74_DEPTH)

    split(bisect_by=Plane(origin=(0, -17.5297762564, 17.5297762564), x_dir=(1, 0, 0), z_dir=(0, -0.7071067812, 0.7071067812)), keep=Keep.TOP)

    split(bisect_by=Plane.XY.offset(14.7395525128), keep=Keep.TOP)


with BuildPart() as f1_13:
    add(f1_12.part)

    # F7_t71: cut F7_tool72
    add(f7_tool72.part, mode=Mode.SUBTRACT)


with BuildPart() as f7_tool79:
    # F7_s80 → F7_t81 (new body)
    with BuildSketch(Plane.YZ.offset(-97.8689716836)):
        with BuildLine():
            Line((-7.3719372179, 14.8173137862), (-3.4043701274, 13.1738936877))
            Line((-3.4043701274, 13.1738936877), (-3.3325280785, 13.2457357367))
            ThreePointArc((-3.3325280785, 13.2457357367), (-4.1978357766, 14.0010723873), (-5.008157951, 14.8113945617))
            Line((-5.008157951, 14.8113945617), (-5.08, 14.8411525128))
            ThreePointArc((-5.08, 14.8411525128), (-6.2259686089, 14.8411525128), (-7.3719372179, 14.9189137862))
            Line((-7.3719372179, 14.9189137862), (-7.3719372179, 14.8173137862))
        make_face()
    extrude(amount=F7_T81_DEPTH)

    split(bisect_by=Plane(origin=(-4.5763601417, 0, 12.5734461526), x_dir=(0, 1, 0), z_dir=(0.3420201433, 0, -0.9396926208)), keep=Keep.TOP)

    split(bisect_by=Plane(origin=(-1.4194489068, 4.1501909595, 3.8999038195), x_dir=(0.9461886483, 0.3236155771, 0), z_dir=(0.2418447626, -0.7071067812, -0.6644630244)), keep=Keep.TOP)


with BuildPart() as f7_tool84:
    # F7_s85 → F7_t86 (new body)
    with BuildSketch(Plane(origin=(0.563938989, 0, 0.2052570059), x_dir=(0, 1, 0), z_dir=(0.9396926208, 0, 0.3420201433))):
        with BuildLine():
            Line((-7.3719372179, 13.4581431925), (-3.4043701274, 11.814723094))
            Line((-3.4043701274, 11.814723094), (-3.3325280785, 11.886565143))
            ThreePointArc((-3.3325280785, 11.886565143), (-4.1978357766, 12.6419017936), (-5.008157951, 13.452223968))
            Line((-5.008157951, 13.452223968), (-5.08, 13.4819819191))
            ThreePointArc((-5.08, 13.4819819191), (-6.2259686089, 13.4819819191), (-7.3719372179, 13.5597431925))
            Line((-7.3719372179, 13.5597431925), (-7.3719372179, 13.4581431925))
        make_face()
    extrude(amount=F7_T86_DEPTH)

    split(bisect_by=Plane.XY.offset(14.7395525128), keep=Keep.BOTTOM)

    split(bisect_by=Plane(origin=(0, 4.8297762564, 4.8297762564), x_dir=(1, 0, 0), z_dir=(0, -0.7071067812, -0.7071067812)), keep=Keep.TOP)


with BuildPart() as f7_tool79_1:
    add(f7_tool79.part)

    # F7_t89: intersect F7_tool84
    add(f7_tool84.part, mode=Mode.INTERSECT)


with BuildPart() as f1_14:
    add(f1_13.part)

    # F7_t77: cut F7_tool79
    add(f7_tool79_1.part, mode=Mode.SUBTRACT)


with BuildPart() as f7_tool92:
    # F7_s93 → F7_t94 (new body)
    with BuildSketch(Plane.YZ.offset(7.1081081408)):
        with BuildLine():
            Line((-21.9956298726, 13.1738936877), (-18.0280627821, 14.8173137862))
            Line((-18.0280627821, 14.8173137862), (-18.0280627821, 14.9189137862))
            ThreePointArc((-18.0280627821, 14.9189137862), (-19.1740313911, 14.8411525128), (-20.32, 14.8411525128))
            Line((-20.32, 14.8411525128), (-20.391842049, 14.8113945617))
            ThreePointArc((-20.391842049, 14.8113945617), (-21.2021642234, 14.0010723873), (-22.0674719215, 13.2457357367))
            Line((-22.0674719215, 13.2457357367), (-21.9956298726, 13.1738936877))
        make_face()
    extrude(amount=-F7_T94_DEPTH)

    split(bisect_by=Plane(origin=(-5.763104727, -16.8501909595, 15.8340001035), x_dir=(-0.9461886483, 0.3236155771, 0), z_dir=(0.2418447626, 0.7071067812, -0.6644630244)), keep=Keep.TOP)

    split(bisect_by=Plane(origin=(-4.5763601417, 0, 12.5734461526), x_dir=(0, 1, 0), z_dir=(0.3420201433, 0, -0.9396926208)), keep=Keep.TOP)


with BuildPart() as f7_tool97:
    # F7_s98 → F7_t99 (new body)
    with BuildSketch(Plane(origin=(0.563938989, 0, 0.2052570059), x_dir=(0, 1, 0), z_dir=(0.9396926208, 0, 0.3420201433))):
        with BuildLine():
            Line((-21.9956298726, 11.814723094), (-18.0280627821, 13.4581431925))
            Line((-18.0280627821, 13.4581431925), (-18.0280627821, 13.5597431925))
            ThreePointArc((-18.0280627821, 13.5597431925), (-19.1740313911, 13.4819819191), (-20.32, 13.4819819191))
            Line((-20.32, 13.4819819191), (-20.391842049, 13.452223968))
            ThreePointArc((-20.391842049, 13.452223968), (-21.2021642234, 12.6419017936), (-22.0674719215, 11.886565143))
            Line((-22.0674719215, 11.886565143), (-21.9956298726, 11.814723094))
        make_face()
    extrude(amount=F7_T99_DEPTH)

    split(bisect_by=Plane(origin=(0, -17.5297762564, 17.5297762564), x_dir=(1, 0, 0), z_dir=(0, 0.7071067812, -0.7071067812)), keep=Keep.TOP)

    split(bisect_by=Plane.XY.offset(14.7395525128), keep=Keep.BOTTOM)


with BuildPart() as f7_tool92_1:
    add(f7_tool92.part)

    # F7_t102: intersect F7_tool97
    add(f7_tool97.part, mode=Mode.INTERSECT)


with BuildPart() as f1_15:
    add(f1_14.part)

    # F7_t90: cut F7_tool92
    add(f7_tool92_1.part, mode=Mode.SUBTRACT)


solid = f1_15.part
